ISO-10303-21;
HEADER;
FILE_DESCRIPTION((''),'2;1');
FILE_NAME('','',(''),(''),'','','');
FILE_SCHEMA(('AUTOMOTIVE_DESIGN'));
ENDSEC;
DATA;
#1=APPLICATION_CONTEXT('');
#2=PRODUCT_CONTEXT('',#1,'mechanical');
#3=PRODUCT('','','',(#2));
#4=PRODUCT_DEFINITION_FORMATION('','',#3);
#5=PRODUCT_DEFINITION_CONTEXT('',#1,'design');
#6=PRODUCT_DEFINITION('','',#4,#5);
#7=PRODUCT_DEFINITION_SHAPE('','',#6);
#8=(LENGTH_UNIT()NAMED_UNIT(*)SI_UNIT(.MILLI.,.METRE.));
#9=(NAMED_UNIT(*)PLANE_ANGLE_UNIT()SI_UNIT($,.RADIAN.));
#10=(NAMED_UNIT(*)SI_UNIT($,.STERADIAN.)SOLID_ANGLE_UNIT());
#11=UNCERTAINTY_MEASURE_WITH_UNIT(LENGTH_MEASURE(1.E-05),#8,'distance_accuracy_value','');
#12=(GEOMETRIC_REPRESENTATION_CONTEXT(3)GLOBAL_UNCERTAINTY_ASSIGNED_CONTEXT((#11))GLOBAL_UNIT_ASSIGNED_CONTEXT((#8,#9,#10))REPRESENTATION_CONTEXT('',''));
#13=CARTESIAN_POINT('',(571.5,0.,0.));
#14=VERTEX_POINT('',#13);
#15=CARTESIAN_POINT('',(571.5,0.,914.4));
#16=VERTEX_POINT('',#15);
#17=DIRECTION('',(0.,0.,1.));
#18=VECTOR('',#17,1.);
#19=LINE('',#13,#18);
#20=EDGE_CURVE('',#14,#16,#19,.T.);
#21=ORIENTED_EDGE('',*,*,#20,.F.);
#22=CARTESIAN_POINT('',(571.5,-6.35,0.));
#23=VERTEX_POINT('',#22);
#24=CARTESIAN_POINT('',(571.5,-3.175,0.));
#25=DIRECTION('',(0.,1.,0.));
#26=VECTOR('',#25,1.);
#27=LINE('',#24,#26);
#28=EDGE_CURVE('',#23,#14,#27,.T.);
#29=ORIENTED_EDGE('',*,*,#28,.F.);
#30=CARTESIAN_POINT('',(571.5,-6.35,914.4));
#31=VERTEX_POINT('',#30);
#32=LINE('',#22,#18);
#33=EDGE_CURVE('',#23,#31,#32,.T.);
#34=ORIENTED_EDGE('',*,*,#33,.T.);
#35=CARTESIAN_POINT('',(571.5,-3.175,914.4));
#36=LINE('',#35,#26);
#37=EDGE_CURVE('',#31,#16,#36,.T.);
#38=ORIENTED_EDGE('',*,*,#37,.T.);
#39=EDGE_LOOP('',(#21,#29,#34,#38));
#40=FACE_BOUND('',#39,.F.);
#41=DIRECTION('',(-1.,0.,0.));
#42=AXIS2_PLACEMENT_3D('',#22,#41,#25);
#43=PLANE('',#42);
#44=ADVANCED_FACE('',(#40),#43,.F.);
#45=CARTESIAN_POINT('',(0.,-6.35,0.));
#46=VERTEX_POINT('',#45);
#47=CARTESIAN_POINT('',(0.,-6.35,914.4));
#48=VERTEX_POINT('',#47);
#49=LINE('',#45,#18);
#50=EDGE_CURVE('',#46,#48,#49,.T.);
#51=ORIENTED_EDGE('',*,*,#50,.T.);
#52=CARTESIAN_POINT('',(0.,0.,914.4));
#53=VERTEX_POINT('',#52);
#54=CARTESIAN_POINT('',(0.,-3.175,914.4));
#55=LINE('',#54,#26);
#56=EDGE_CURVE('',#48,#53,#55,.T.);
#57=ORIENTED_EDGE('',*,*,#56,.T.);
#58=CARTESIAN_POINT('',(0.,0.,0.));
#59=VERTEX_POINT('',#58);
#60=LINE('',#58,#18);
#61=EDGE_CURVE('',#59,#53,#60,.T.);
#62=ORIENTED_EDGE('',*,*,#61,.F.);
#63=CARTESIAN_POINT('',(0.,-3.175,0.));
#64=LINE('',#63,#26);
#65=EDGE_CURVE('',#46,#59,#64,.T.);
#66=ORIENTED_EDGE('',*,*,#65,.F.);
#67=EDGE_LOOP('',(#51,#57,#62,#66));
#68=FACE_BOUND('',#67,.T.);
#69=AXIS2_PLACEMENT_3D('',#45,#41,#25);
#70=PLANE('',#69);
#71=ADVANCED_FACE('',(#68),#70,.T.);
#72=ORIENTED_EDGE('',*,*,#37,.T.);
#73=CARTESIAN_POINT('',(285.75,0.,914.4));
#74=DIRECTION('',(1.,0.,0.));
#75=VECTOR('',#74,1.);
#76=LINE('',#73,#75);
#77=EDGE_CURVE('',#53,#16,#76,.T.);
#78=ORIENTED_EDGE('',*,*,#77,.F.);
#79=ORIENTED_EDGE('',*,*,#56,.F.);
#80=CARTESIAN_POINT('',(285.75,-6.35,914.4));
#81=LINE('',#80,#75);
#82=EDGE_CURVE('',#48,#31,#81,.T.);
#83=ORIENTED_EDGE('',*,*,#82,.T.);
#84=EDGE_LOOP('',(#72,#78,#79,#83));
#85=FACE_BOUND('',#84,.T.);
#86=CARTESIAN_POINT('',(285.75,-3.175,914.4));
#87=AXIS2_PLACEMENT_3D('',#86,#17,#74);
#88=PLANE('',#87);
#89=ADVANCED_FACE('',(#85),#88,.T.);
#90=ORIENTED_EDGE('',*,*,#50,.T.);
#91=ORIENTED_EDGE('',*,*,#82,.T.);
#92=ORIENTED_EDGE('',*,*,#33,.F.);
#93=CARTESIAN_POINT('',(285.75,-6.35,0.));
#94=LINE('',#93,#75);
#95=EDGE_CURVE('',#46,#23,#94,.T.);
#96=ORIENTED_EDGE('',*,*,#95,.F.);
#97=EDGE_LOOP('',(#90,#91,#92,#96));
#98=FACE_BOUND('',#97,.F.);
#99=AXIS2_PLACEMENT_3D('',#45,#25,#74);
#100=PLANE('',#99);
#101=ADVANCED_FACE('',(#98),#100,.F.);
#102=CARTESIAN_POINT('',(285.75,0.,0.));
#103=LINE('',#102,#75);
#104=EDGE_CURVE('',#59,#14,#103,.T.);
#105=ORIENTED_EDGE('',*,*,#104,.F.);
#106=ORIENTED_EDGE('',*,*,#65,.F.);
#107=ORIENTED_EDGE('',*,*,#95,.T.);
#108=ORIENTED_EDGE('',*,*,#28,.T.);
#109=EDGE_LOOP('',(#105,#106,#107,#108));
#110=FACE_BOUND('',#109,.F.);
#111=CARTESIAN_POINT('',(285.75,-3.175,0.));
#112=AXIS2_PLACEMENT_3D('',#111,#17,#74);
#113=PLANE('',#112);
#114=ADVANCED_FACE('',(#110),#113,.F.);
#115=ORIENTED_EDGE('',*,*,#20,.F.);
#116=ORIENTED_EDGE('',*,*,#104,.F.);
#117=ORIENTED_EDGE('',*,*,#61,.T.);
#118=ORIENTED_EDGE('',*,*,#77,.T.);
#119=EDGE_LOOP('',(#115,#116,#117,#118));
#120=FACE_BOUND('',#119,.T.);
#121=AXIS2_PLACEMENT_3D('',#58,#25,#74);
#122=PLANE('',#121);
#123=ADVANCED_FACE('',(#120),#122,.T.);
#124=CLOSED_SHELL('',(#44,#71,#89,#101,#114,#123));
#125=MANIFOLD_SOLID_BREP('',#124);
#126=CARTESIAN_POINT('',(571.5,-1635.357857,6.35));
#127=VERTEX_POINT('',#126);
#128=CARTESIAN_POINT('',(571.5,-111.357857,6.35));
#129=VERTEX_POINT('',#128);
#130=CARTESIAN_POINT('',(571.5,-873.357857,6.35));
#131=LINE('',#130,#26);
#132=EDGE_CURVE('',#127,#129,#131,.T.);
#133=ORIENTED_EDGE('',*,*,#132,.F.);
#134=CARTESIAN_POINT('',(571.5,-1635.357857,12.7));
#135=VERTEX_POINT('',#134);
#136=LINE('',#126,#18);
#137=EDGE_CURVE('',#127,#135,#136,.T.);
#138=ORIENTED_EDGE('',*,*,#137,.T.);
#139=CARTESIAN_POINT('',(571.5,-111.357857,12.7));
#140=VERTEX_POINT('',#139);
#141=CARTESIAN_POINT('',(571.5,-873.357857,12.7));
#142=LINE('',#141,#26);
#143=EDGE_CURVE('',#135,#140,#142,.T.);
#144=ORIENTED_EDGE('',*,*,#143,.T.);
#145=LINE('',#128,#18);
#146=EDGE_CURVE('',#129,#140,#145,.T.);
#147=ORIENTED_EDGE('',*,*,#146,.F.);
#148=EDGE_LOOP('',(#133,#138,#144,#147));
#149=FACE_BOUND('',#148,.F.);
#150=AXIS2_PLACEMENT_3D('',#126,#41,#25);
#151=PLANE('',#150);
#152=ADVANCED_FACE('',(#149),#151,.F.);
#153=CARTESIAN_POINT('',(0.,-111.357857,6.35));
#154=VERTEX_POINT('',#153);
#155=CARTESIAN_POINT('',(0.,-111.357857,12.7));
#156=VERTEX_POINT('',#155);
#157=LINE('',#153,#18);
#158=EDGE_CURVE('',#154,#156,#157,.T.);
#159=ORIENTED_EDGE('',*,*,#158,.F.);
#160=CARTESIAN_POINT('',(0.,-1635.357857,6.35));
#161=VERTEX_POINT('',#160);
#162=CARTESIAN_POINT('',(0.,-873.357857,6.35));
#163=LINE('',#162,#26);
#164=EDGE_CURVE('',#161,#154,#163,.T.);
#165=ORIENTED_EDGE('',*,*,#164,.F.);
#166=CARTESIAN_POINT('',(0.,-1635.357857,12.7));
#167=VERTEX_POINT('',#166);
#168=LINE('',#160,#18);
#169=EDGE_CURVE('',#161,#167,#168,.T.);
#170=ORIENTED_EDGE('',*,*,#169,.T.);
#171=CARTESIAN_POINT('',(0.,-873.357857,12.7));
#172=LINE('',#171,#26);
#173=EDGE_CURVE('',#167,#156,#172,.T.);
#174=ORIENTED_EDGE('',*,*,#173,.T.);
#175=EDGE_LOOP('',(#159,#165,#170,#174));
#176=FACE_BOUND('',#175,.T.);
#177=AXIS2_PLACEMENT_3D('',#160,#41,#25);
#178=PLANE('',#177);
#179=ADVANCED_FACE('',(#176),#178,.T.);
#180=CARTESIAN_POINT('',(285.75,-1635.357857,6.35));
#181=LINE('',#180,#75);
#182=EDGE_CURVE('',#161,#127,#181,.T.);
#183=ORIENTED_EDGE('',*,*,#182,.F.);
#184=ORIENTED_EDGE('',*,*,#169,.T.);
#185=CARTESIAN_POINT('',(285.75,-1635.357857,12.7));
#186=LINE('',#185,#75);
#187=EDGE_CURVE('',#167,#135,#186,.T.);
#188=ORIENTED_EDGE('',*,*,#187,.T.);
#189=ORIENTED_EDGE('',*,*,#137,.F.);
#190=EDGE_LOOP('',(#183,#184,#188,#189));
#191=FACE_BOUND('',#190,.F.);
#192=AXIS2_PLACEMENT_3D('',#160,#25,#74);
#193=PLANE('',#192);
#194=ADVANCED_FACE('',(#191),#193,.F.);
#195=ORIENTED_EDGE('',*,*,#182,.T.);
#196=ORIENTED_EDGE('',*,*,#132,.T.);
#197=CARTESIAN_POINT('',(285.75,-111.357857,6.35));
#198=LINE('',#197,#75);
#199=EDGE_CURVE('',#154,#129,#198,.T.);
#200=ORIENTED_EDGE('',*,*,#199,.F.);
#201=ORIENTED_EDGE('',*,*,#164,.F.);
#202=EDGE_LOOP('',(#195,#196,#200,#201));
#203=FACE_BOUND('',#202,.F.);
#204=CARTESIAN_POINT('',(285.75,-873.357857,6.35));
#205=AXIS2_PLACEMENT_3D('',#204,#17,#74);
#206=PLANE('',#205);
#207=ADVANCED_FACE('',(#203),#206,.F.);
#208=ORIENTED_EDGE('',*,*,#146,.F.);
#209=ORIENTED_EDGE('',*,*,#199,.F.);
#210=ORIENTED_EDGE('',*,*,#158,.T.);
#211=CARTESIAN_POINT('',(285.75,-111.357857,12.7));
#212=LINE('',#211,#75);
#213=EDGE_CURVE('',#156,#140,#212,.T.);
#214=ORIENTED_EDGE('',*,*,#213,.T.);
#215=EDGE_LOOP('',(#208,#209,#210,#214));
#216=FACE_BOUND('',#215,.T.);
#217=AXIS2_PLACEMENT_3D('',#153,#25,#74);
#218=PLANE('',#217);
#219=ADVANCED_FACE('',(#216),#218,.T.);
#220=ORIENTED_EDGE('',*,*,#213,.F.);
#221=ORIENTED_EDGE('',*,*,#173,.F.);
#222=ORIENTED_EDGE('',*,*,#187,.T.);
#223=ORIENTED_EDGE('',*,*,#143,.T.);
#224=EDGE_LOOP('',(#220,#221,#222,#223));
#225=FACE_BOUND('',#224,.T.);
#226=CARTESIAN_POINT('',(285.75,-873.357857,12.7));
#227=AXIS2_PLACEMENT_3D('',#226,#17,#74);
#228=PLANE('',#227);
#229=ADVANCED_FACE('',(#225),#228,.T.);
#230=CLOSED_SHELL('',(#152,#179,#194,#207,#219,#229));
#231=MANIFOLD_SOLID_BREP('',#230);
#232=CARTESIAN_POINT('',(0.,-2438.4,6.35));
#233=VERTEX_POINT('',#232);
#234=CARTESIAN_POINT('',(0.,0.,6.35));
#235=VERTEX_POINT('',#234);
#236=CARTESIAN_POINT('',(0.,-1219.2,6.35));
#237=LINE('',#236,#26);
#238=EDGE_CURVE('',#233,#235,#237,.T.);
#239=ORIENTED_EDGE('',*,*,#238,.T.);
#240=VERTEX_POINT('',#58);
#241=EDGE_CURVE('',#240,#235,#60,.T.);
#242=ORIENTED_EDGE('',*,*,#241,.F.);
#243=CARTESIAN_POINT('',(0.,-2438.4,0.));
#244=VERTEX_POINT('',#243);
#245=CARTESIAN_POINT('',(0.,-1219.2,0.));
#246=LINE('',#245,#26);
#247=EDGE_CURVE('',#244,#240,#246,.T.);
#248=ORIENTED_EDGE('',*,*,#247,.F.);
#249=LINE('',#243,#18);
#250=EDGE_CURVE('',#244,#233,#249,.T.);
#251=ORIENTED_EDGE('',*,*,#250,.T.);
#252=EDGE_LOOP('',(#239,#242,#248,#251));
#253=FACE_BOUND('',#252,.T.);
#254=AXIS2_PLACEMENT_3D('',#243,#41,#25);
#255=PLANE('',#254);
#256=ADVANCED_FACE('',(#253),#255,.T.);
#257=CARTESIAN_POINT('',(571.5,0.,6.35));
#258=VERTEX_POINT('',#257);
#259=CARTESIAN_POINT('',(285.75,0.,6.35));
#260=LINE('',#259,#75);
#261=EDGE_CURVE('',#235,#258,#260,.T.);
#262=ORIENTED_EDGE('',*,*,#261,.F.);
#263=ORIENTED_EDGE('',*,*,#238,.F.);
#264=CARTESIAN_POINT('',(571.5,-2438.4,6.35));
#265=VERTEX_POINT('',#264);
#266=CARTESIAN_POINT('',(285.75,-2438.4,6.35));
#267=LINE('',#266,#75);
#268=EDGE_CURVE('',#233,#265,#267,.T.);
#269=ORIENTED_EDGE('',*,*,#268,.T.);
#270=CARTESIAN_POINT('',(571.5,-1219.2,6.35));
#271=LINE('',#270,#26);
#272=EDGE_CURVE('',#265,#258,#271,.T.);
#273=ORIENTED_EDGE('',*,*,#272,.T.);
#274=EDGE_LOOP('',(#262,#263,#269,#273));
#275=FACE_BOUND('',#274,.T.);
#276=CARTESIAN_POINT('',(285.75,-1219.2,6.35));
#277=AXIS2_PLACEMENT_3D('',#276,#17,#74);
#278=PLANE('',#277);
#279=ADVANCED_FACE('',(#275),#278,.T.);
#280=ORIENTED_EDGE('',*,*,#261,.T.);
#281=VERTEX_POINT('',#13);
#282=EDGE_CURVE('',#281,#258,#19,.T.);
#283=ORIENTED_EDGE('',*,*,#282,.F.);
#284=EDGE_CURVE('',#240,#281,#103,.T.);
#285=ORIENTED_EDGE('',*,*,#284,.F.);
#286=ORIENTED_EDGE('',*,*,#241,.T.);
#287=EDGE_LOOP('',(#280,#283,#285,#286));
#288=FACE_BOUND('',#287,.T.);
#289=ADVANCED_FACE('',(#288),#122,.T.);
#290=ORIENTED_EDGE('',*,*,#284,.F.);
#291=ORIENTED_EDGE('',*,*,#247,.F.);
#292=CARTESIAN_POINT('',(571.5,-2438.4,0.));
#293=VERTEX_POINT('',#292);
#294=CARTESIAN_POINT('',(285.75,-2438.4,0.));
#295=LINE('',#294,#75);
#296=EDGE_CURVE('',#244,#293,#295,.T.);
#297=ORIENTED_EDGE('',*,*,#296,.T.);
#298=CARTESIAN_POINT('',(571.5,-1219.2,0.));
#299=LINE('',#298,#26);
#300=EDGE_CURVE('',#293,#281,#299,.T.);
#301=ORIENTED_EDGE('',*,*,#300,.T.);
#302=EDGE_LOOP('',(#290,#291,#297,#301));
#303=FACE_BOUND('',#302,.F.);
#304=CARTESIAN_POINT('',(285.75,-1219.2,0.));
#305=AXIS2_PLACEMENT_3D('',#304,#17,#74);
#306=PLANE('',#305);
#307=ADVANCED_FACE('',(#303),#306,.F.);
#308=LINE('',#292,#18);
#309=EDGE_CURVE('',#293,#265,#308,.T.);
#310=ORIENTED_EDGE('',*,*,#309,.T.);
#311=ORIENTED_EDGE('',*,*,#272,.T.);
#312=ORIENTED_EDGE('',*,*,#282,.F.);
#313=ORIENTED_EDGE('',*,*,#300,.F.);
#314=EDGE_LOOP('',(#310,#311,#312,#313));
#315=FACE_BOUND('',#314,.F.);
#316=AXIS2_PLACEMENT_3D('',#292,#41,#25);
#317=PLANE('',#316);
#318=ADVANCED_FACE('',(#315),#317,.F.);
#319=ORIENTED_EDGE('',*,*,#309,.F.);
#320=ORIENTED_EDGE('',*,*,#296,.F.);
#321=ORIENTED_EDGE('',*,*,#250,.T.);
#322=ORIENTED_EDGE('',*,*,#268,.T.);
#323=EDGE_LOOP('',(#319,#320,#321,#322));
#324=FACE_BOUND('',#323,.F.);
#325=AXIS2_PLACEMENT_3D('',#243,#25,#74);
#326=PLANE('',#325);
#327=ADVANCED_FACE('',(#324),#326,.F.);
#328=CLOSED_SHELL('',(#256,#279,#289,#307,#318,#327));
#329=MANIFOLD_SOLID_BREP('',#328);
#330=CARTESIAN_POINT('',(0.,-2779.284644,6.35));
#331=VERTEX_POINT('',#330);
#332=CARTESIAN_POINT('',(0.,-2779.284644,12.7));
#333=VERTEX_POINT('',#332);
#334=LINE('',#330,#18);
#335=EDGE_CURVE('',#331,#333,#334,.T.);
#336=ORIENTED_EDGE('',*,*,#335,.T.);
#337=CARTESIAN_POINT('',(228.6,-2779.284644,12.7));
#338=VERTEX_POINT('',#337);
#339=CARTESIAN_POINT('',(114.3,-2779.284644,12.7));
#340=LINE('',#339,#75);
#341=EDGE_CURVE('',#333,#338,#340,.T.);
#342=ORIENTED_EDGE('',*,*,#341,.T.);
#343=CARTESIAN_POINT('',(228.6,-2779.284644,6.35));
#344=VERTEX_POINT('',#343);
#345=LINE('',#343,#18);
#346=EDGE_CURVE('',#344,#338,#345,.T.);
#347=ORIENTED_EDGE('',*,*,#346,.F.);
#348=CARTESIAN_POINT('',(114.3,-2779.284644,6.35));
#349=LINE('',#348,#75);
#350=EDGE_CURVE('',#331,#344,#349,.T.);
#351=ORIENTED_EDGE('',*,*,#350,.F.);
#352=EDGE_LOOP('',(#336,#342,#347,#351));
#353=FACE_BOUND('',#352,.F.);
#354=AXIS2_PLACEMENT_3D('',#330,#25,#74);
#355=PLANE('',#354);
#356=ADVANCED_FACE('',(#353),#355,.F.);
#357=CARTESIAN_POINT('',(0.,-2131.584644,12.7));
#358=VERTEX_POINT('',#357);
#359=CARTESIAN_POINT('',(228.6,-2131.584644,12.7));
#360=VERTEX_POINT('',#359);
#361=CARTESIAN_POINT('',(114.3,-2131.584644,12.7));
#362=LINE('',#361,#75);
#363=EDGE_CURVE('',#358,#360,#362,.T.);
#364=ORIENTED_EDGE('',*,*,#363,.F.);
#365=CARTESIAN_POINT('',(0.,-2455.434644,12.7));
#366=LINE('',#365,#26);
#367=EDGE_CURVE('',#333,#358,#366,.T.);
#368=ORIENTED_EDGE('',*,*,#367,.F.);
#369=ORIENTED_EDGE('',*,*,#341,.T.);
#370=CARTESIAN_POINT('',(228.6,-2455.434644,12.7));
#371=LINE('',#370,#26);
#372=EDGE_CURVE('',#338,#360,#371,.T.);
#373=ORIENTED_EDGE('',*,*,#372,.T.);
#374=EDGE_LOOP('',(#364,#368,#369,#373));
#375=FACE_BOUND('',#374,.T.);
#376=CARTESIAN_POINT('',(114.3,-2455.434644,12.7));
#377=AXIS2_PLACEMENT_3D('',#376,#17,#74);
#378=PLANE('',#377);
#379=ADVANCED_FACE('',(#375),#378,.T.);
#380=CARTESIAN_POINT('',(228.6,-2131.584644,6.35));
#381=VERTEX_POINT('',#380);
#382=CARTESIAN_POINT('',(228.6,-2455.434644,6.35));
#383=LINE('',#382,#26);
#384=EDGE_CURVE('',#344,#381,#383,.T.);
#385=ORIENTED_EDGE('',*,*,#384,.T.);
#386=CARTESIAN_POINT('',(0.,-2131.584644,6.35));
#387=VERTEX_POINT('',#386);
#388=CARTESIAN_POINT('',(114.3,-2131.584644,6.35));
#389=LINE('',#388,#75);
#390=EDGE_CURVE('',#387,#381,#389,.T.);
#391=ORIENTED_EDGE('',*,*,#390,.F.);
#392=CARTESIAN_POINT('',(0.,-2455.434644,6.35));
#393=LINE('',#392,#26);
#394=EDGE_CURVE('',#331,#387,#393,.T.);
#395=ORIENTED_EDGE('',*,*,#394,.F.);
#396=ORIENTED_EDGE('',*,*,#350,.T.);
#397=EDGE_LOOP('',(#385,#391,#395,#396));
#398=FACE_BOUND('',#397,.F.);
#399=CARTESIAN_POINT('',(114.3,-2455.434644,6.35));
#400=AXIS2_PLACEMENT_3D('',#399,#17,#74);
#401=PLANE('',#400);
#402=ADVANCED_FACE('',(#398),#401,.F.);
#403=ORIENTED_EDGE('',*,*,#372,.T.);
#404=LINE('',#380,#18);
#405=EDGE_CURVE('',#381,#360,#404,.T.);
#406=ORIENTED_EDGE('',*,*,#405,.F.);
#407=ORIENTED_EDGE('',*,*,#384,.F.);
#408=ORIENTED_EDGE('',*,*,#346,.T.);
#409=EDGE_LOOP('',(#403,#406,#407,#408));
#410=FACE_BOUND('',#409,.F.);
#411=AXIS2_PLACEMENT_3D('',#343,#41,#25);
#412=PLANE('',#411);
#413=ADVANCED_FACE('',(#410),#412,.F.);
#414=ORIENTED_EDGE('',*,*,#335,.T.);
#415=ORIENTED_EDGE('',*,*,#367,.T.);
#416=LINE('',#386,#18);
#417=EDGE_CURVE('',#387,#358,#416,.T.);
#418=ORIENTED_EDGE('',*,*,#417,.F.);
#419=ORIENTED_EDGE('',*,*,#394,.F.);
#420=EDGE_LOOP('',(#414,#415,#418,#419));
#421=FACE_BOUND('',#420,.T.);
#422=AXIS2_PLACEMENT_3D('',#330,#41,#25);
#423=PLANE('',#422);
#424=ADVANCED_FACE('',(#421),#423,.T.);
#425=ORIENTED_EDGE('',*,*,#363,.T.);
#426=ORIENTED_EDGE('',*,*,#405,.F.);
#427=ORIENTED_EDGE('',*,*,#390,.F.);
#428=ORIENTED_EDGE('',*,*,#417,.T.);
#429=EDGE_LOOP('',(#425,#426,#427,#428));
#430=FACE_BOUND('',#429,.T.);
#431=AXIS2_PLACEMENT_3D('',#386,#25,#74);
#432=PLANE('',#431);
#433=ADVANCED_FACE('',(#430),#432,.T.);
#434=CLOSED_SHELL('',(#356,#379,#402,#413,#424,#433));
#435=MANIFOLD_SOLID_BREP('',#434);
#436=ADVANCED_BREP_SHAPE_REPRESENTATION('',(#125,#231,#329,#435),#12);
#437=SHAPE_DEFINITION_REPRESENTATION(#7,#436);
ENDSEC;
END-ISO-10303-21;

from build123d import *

# Parameters (mm, degrees)
F0_W     = 571.5
F0_H     = 2438.4
F1_DEPTH = 6.35
F2_W     = 571.5
F2_H     = 6.35
F3_DEPTH = 914.4
F4_W     = 228.6
F4_H     = 647.7
F5_DEPTH = 6.35
F6_W     = 571.5
F6_H     = 1524
F7_DEPTH = 6.35


# Not quite as in the source:
# - a length typed as a fraction of an inch, garbled in the dataset ("3 / 203.2 mm" for 3/8 in), is restored


with BuildPart() as f1:
    # F0 (on Top) → F1 (new body)
    with BuildSketch(Plane.XY):
        with Locations((285.75, -1219.2)):
            Rectangle(F0_W, F0_H)
    extrude(amount=F1_DEPTH)


with BuildPart() as f3:
    # F2 (on Top) → F3 (new body)
    with BuildSketch(Plane.XY):
        with Locations((285.75, -3.175)):
            Rectangle(F2_W, F2_H)
    extrude(amount=F3_DEPTH)


with BuildPart() as f5:
    # F4 (on face) → F5 (new body)
    with BuildSketch(Plane.XY.offset(6.35)):
        with Locations((114.3, -2455.4346443176)):
            Rectangle(F4_W, F4_H)
    extrude(amount=F5_DEPTH)


with BuildPart() as f7:
    # F6 (on face) → F7 (new body)
    with BuildSketch(Plane.XY.offset(6.35)):
        with Locations((285.75, -873.3578567505)):
            Rectangle(F6_W, F6_H)
    extrude(amount=F7_DEPTH)


solid = Compound([f1.part, f3.part, f5.part, f7.part])
